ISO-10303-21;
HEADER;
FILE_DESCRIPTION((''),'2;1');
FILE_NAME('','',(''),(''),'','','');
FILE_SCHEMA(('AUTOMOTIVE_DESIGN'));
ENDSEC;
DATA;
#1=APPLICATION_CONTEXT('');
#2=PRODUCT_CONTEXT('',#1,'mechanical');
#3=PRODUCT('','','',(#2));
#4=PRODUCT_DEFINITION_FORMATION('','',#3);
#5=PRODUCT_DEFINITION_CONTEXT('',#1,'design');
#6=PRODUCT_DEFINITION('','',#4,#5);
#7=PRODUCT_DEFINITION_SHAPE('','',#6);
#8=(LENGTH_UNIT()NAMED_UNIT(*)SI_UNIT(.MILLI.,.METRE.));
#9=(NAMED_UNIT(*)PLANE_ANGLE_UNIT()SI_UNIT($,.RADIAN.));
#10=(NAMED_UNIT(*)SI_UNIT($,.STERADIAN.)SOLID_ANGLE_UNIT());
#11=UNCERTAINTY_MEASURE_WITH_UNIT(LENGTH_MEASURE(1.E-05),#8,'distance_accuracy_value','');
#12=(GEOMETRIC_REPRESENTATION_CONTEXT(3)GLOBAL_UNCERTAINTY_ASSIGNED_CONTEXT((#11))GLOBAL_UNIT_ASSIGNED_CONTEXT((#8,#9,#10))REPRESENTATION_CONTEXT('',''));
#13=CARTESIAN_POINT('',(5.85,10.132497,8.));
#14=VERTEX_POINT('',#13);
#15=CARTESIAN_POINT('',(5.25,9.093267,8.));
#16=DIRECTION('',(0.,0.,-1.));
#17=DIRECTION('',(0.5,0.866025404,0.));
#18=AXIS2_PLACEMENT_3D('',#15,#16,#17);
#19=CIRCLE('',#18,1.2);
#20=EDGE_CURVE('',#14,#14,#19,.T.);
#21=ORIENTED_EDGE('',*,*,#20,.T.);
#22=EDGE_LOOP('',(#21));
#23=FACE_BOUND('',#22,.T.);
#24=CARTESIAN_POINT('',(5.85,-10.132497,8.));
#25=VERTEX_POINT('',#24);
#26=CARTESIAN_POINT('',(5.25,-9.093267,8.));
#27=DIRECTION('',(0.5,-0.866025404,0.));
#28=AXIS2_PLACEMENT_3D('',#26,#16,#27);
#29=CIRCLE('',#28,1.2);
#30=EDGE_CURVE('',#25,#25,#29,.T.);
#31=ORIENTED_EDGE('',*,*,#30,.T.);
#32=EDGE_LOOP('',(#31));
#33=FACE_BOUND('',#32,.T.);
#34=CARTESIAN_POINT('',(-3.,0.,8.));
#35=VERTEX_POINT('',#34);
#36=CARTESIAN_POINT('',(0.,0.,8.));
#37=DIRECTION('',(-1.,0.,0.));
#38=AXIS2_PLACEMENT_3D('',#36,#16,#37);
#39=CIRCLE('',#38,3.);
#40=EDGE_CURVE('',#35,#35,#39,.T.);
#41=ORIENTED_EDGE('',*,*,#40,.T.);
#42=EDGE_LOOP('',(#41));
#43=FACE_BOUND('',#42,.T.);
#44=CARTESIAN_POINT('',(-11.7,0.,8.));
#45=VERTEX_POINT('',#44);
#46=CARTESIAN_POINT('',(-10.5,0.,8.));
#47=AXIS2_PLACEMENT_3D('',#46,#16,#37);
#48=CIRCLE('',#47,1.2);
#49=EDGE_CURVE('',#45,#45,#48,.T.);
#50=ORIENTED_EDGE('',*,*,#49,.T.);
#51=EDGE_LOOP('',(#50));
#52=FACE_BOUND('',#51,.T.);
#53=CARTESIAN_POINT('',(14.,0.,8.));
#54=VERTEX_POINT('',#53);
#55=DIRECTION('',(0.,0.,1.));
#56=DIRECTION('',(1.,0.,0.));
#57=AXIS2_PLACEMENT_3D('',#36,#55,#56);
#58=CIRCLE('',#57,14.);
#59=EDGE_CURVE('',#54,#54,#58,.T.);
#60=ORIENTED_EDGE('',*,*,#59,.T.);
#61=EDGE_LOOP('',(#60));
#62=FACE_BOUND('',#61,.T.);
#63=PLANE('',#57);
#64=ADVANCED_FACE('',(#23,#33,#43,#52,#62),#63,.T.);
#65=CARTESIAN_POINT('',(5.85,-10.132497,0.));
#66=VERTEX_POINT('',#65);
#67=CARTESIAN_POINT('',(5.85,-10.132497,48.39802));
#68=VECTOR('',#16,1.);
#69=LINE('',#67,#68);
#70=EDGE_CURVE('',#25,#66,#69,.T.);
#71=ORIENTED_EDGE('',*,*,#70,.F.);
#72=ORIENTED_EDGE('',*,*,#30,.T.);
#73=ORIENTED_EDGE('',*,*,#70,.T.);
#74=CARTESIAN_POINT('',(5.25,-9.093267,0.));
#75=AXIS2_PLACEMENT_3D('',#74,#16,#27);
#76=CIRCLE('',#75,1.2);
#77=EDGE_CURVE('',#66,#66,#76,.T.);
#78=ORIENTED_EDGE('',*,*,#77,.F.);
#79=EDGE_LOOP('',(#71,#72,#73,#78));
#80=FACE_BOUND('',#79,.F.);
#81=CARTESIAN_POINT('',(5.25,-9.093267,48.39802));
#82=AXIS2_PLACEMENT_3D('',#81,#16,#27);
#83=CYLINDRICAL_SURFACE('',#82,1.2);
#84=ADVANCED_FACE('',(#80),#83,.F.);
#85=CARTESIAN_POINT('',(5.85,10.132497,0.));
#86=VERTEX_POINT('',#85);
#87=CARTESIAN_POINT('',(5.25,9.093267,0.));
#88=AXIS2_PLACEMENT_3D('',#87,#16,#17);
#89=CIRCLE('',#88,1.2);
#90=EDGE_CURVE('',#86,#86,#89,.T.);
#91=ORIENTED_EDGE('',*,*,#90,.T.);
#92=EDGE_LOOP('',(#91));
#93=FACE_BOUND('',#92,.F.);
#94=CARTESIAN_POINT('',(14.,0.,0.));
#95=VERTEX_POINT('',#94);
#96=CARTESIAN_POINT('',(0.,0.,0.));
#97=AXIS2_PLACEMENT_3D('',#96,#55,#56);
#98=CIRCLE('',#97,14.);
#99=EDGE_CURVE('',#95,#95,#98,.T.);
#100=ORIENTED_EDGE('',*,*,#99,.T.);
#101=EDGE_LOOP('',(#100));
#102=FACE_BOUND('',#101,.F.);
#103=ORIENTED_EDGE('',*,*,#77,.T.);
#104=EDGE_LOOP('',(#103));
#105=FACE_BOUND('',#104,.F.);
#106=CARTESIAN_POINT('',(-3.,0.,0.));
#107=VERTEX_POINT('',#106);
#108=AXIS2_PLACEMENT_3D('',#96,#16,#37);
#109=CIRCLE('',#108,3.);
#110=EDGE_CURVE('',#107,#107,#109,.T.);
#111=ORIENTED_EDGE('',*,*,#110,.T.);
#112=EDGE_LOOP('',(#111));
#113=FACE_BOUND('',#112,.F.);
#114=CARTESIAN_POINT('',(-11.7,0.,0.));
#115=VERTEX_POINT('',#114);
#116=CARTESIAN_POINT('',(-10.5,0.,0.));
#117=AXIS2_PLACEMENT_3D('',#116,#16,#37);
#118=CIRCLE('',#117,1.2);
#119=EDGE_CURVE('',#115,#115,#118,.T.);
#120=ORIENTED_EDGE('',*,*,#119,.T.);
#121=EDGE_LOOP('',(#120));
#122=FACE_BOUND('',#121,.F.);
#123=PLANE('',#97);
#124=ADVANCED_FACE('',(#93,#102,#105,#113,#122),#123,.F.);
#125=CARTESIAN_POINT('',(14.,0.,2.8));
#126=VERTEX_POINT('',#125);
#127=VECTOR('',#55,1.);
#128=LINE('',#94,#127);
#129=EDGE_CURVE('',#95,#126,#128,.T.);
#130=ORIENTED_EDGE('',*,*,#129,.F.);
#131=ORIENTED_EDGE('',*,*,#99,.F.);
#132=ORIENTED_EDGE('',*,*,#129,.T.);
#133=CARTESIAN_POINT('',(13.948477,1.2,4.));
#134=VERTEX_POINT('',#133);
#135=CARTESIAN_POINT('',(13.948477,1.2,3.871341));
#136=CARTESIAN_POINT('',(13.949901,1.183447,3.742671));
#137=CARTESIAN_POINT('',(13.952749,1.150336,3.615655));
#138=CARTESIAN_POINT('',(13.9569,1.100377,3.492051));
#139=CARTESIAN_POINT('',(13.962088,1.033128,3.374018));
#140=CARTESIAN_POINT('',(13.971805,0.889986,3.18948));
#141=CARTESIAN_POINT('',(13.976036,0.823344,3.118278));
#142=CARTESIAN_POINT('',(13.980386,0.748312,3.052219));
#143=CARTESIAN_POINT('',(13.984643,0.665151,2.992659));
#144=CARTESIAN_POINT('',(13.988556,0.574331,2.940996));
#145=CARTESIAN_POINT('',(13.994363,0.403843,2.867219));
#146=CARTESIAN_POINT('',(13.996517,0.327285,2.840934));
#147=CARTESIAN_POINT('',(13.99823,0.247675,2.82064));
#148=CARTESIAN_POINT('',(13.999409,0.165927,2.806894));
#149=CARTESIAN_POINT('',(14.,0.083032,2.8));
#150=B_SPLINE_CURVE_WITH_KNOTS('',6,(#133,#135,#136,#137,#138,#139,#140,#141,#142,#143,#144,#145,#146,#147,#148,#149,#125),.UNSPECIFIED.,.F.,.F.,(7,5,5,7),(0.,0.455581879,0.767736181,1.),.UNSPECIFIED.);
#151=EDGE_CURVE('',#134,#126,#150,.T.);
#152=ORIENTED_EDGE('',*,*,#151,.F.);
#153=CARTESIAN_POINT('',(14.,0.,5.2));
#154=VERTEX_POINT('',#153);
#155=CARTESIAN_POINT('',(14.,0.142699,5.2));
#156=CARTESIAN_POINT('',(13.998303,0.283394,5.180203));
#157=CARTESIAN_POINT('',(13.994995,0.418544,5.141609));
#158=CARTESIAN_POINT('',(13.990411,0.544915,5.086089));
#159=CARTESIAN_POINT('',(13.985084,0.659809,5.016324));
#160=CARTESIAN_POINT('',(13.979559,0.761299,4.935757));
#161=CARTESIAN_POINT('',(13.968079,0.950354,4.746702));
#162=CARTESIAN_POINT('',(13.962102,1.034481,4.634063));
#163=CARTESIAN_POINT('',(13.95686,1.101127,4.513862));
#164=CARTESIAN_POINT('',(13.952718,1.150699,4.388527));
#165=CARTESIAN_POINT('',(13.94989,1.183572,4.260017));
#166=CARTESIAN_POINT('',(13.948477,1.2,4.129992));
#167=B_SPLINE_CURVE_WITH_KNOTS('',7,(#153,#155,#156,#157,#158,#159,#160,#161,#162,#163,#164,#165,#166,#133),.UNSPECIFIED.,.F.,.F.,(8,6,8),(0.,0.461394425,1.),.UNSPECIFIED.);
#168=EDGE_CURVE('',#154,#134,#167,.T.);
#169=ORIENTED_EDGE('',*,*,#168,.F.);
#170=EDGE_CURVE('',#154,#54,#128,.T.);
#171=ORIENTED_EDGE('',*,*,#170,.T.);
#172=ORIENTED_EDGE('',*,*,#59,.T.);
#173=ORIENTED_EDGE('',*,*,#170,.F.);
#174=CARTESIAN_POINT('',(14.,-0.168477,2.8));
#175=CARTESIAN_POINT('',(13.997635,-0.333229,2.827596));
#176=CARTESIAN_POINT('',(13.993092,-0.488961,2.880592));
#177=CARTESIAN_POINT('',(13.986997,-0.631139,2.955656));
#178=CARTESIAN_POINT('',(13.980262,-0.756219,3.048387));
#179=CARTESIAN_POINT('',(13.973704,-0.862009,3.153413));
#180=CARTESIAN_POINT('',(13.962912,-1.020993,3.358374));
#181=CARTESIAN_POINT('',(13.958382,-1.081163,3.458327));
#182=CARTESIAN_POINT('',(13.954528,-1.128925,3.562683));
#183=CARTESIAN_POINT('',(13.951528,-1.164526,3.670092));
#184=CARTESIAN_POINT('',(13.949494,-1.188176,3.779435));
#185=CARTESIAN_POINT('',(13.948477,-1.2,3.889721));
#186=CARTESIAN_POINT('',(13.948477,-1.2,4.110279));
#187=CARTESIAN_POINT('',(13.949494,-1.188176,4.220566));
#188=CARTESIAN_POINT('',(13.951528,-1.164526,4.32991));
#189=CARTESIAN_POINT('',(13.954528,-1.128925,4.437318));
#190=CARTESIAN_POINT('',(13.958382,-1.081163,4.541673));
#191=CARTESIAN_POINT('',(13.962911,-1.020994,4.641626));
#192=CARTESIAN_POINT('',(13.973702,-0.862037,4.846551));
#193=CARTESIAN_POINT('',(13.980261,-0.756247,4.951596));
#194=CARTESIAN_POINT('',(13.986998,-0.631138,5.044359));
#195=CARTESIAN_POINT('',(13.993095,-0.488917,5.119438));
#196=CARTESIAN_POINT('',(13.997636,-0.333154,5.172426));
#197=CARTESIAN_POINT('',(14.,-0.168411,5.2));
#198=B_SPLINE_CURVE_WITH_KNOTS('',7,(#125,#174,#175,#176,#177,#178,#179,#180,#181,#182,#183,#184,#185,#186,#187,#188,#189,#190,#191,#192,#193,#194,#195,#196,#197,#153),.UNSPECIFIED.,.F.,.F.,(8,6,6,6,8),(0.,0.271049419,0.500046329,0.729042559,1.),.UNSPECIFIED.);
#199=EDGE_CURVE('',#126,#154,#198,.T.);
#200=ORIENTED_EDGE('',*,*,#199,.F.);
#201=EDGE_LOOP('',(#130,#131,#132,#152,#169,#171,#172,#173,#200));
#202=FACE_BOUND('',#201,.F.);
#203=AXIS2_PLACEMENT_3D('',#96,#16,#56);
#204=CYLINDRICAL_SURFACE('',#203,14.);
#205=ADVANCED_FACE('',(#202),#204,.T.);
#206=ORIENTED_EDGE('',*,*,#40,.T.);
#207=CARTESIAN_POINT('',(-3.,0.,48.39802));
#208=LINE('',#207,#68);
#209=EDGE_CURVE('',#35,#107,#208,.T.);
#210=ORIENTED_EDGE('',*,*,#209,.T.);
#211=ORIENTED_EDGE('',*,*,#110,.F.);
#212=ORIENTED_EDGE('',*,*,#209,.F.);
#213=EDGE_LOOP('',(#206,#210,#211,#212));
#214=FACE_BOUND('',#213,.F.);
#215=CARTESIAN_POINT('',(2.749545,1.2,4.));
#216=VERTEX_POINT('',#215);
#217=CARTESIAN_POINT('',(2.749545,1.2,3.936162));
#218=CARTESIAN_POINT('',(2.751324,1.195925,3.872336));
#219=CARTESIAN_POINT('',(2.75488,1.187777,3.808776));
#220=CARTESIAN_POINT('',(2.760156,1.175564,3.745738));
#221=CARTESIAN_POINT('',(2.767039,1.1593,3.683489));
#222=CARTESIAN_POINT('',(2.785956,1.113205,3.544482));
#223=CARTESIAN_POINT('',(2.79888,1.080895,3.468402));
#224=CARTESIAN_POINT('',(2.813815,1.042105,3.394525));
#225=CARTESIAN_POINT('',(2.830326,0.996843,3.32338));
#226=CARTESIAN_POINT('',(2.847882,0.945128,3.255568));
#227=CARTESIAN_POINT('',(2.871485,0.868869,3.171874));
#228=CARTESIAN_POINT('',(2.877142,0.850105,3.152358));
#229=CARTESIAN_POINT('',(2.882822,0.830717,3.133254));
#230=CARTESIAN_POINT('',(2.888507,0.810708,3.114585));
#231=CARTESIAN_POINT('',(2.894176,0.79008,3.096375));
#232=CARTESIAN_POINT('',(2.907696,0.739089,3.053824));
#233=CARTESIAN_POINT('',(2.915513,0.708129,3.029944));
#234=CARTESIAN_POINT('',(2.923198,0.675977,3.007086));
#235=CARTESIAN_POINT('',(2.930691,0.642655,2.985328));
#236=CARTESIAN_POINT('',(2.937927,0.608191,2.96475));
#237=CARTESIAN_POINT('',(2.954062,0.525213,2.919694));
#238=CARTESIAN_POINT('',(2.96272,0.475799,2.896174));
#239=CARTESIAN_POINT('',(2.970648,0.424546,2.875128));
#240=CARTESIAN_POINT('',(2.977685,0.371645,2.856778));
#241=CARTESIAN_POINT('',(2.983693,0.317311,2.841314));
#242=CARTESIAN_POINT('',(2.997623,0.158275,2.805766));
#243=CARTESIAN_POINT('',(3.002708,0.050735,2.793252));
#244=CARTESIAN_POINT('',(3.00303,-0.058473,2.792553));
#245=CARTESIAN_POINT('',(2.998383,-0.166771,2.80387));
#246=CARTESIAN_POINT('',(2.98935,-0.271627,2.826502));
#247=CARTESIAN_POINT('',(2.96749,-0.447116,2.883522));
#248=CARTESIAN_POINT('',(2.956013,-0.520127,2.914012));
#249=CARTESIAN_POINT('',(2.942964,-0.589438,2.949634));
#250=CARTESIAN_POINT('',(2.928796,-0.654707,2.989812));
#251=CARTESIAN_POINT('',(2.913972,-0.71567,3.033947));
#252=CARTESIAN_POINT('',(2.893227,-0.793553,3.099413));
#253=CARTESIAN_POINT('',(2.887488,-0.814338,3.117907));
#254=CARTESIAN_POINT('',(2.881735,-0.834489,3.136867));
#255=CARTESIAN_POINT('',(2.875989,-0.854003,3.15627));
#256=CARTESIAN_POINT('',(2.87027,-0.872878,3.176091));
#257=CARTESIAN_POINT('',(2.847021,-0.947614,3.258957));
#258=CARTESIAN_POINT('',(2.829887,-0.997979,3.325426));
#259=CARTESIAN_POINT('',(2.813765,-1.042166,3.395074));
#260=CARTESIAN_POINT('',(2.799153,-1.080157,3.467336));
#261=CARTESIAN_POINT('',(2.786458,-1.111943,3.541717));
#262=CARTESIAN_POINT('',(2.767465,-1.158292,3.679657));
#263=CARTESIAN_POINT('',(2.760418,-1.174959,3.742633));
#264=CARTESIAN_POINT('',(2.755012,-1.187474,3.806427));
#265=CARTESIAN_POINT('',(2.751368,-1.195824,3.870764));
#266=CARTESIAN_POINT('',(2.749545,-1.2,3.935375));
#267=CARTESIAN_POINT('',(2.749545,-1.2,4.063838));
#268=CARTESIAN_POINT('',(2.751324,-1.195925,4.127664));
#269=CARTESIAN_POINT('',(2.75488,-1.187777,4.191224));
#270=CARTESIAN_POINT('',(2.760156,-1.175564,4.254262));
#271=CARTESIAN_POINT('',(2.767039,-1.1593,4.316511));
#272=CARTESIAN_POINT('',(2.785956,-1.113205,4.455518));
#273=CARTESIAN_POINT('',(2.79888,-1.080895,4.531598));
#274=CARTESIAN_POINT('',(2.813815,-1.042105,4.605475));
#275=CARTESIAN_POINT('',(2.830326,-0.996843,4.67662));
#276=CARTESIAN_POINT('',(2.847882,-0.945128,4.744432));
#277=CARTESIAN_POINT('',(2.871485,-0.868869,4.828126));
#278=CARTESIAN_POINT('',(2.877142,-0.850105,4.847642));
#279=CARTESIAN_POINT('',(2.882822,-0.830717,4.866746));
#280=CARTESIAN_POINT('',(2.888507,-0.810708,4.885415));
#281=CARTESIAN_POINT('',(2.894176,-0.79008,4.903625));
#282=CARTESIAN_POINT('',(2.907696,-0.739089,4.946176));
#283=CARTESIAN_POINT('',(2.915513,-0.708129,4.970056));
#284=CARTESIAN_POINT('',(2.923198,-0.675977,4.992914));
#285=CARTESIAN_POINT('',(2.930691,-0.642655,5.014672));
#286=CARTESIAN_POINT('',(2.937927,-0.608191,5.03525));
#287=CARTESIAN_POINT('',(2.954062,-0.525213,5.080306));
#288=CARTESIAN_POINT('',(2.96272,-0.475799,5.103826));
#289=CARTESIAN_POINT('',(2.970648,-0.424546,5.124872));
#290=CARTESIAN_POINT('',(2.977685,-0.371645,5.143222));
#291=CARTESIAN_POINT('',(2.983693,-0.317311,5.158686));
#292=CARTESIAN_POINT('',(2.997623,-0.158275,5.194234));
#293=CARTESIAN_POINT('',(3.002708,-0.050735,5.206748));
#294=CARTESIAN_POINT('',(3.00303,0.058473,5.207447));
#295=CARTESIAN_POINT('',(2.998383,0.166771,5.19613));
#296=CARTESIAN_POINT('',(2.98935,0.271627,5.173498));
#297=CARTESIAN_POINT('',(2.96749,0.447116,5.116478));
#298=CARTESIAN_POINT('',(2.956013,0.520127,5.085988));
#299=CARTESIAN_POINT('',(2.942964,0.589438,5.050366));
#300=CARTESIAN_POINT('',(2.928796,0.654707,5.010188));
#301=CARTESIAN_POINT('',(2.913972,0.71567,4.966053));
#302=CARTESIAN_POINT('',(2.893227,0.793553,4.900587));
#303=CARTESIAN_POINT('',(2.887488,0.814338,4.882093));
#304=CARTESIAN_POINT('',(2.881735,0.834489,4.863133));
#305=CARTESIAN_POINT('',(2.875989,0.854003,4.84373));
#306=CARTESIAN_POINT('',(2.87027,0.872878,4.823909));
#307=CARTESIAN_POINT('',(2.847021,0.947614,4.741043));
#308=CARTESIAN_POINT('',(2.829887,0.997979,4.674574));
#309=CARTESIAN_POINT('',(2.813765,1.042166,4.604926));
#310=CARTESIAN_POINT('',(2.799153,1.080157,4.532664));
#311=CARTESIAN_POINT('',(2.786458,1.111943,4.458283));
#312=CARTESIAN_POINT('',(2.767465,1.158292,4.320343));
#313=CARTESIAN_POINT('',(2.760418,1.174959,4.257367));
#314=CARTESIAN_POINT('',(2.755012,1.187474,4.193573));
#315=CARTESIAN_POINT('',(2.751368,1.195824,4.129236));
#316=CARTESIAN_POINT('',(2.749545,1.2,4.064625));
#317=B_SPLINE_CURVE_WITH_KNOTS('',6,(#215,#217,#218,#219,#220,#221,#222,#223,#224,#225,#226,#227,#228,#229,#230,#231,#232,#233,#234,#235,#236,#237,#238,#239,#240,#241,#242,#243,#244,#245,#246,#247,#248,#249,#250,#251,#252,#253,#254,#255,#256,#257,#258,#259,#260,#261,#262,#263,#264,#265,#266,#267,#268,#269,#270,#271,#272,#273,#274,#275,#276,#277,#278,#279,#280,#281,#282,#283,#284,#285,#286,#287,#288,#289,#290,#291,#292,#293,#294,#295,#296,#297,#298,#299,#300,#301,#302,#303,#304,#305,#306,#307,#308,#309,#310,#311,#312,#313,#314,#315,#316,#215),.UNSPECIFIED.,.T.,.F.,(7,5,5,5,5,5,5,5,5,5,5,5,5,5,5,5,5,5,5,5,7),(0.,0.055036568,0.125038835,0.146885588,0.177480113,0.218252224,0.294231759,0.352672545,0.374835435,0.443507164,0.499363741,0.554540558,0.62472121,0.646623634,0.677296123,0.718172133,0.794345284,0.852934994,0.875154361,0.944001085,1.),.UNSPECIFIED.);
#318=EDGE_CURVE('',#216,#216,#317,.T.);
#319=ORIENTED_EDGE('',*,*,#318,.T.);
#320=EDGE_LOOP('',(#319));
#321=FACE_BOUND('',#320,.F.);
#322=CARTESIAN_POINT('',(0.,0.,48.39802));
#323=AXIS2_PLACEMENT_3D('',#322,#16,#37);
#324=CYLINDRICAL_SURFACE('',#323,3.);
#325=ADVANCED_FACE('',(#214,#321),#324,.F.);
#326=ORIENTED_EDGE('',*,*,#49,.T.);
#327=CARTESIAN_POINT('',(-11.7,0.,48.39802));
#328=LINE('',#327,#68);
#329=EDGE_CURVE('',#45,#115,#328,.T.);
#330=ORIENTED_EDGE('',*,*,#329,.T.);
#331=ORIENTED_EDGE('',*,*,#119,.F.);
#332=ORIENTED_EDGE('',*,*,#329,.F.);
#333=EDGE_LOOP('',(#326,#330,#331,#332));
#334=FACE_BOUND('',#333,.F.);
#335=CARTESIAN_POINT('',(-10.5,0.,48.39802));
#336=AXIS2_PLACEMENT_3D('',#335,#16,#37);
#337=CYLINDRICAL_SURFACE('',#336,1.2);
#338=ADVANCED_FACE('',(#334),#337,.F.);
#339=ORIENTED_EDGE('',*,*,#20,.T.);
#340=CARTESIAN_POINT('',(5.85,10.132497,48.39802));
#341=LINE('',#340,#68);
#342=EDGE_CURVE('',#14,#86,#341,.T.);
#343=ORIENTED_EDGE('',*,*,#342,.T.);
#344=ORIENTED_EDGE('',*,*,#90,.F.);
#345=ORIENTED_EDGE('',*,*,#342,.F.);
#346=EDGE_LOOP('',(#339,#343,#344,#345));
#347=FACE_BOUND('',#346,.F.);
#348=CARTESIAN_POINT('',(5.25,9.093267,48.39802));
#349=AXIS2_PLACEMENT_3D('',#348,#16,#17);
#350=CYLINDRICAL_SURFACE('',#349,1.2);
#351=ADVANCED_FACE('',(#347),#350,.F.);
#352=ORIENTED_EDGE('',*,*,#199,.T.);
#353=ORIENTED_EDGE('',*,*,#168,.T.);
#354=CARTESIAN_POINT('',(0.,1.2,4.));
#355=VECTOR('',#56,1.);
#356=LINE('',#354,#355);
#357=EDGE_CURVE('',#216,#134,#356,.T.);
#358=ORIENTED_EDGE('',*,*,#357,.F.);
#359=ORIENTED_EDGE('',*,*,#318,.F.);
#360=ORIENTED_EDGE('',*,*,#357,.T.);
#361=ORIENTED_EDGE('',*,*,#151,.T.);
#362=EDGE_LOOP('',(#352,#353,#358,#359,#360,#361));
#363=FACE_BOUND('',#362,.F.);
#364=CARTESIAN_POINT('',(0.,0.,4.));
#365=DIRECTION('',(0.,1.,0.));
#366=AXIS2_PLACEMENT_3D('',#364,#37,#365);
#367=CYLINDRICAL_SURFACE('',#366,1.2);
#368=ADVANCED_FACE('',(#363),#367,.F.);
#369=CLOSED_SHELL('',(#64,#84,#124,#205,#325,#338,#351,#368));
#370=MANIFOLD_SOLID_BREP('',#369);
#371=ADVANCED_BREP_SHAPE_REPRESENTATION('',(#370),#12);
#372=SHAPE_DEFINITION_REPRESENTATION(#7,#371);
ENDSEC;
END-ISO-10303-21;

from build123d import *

# Parameters (mm, degrees)
F0_R            = 14
F1_DEPTH        = 8
F3_D            = 6
F4_D            = 2.4
F4_COPIES_COUNT = 3
F6_D            = 2.4
F6_DEPTH        = 14.001


# Not quite as in the source:
# - a pattern or mirror of a feature is missing from the dataset's text; its kind, count and spacing are read off the source's solid


with BuildPart() as f1:
    # F0 (on Top) → F1 (new body)
    with BuildSketch(Plane.XY):
        Circle(F0_R)
    extrude(amount=F1_DEPTH)

    # F3 (through all)
    with Locations(Plane.XY.offset(8)):
        with Locations((0, 0)):
            Hole(F3_D / 2)

    # F4 (through all)
    with Locations(Plane.XY.offset(8)):
        with Locations((-10.5, 0)):
            f4 = Hole(F4_D / 2)

    # F4_copies: F4 ×3 about axis
    f4_copies_axis = Axis((0, 0, 0), (0, 0, 1))
    for i in range(1, F4_COPIES_COUNT):
        add(f4.rotate(f4_copies_axis, i * 360 / F4_COPIES_COUNT), mode=Mode.SUBTRACT)

    # F6 (through all, one way)
    with BuildSketch(Plane(origin=(0, 0, 0), x_dir=(0, 1, 0), z_dir=(-1, 0, 0))):
        with Locations((0, -4)):
            Circle(F6_D / 2)
    extrude(amount=-F6_DEPTH, mode=Mode.SUBTRACT)


solid = f1.part
